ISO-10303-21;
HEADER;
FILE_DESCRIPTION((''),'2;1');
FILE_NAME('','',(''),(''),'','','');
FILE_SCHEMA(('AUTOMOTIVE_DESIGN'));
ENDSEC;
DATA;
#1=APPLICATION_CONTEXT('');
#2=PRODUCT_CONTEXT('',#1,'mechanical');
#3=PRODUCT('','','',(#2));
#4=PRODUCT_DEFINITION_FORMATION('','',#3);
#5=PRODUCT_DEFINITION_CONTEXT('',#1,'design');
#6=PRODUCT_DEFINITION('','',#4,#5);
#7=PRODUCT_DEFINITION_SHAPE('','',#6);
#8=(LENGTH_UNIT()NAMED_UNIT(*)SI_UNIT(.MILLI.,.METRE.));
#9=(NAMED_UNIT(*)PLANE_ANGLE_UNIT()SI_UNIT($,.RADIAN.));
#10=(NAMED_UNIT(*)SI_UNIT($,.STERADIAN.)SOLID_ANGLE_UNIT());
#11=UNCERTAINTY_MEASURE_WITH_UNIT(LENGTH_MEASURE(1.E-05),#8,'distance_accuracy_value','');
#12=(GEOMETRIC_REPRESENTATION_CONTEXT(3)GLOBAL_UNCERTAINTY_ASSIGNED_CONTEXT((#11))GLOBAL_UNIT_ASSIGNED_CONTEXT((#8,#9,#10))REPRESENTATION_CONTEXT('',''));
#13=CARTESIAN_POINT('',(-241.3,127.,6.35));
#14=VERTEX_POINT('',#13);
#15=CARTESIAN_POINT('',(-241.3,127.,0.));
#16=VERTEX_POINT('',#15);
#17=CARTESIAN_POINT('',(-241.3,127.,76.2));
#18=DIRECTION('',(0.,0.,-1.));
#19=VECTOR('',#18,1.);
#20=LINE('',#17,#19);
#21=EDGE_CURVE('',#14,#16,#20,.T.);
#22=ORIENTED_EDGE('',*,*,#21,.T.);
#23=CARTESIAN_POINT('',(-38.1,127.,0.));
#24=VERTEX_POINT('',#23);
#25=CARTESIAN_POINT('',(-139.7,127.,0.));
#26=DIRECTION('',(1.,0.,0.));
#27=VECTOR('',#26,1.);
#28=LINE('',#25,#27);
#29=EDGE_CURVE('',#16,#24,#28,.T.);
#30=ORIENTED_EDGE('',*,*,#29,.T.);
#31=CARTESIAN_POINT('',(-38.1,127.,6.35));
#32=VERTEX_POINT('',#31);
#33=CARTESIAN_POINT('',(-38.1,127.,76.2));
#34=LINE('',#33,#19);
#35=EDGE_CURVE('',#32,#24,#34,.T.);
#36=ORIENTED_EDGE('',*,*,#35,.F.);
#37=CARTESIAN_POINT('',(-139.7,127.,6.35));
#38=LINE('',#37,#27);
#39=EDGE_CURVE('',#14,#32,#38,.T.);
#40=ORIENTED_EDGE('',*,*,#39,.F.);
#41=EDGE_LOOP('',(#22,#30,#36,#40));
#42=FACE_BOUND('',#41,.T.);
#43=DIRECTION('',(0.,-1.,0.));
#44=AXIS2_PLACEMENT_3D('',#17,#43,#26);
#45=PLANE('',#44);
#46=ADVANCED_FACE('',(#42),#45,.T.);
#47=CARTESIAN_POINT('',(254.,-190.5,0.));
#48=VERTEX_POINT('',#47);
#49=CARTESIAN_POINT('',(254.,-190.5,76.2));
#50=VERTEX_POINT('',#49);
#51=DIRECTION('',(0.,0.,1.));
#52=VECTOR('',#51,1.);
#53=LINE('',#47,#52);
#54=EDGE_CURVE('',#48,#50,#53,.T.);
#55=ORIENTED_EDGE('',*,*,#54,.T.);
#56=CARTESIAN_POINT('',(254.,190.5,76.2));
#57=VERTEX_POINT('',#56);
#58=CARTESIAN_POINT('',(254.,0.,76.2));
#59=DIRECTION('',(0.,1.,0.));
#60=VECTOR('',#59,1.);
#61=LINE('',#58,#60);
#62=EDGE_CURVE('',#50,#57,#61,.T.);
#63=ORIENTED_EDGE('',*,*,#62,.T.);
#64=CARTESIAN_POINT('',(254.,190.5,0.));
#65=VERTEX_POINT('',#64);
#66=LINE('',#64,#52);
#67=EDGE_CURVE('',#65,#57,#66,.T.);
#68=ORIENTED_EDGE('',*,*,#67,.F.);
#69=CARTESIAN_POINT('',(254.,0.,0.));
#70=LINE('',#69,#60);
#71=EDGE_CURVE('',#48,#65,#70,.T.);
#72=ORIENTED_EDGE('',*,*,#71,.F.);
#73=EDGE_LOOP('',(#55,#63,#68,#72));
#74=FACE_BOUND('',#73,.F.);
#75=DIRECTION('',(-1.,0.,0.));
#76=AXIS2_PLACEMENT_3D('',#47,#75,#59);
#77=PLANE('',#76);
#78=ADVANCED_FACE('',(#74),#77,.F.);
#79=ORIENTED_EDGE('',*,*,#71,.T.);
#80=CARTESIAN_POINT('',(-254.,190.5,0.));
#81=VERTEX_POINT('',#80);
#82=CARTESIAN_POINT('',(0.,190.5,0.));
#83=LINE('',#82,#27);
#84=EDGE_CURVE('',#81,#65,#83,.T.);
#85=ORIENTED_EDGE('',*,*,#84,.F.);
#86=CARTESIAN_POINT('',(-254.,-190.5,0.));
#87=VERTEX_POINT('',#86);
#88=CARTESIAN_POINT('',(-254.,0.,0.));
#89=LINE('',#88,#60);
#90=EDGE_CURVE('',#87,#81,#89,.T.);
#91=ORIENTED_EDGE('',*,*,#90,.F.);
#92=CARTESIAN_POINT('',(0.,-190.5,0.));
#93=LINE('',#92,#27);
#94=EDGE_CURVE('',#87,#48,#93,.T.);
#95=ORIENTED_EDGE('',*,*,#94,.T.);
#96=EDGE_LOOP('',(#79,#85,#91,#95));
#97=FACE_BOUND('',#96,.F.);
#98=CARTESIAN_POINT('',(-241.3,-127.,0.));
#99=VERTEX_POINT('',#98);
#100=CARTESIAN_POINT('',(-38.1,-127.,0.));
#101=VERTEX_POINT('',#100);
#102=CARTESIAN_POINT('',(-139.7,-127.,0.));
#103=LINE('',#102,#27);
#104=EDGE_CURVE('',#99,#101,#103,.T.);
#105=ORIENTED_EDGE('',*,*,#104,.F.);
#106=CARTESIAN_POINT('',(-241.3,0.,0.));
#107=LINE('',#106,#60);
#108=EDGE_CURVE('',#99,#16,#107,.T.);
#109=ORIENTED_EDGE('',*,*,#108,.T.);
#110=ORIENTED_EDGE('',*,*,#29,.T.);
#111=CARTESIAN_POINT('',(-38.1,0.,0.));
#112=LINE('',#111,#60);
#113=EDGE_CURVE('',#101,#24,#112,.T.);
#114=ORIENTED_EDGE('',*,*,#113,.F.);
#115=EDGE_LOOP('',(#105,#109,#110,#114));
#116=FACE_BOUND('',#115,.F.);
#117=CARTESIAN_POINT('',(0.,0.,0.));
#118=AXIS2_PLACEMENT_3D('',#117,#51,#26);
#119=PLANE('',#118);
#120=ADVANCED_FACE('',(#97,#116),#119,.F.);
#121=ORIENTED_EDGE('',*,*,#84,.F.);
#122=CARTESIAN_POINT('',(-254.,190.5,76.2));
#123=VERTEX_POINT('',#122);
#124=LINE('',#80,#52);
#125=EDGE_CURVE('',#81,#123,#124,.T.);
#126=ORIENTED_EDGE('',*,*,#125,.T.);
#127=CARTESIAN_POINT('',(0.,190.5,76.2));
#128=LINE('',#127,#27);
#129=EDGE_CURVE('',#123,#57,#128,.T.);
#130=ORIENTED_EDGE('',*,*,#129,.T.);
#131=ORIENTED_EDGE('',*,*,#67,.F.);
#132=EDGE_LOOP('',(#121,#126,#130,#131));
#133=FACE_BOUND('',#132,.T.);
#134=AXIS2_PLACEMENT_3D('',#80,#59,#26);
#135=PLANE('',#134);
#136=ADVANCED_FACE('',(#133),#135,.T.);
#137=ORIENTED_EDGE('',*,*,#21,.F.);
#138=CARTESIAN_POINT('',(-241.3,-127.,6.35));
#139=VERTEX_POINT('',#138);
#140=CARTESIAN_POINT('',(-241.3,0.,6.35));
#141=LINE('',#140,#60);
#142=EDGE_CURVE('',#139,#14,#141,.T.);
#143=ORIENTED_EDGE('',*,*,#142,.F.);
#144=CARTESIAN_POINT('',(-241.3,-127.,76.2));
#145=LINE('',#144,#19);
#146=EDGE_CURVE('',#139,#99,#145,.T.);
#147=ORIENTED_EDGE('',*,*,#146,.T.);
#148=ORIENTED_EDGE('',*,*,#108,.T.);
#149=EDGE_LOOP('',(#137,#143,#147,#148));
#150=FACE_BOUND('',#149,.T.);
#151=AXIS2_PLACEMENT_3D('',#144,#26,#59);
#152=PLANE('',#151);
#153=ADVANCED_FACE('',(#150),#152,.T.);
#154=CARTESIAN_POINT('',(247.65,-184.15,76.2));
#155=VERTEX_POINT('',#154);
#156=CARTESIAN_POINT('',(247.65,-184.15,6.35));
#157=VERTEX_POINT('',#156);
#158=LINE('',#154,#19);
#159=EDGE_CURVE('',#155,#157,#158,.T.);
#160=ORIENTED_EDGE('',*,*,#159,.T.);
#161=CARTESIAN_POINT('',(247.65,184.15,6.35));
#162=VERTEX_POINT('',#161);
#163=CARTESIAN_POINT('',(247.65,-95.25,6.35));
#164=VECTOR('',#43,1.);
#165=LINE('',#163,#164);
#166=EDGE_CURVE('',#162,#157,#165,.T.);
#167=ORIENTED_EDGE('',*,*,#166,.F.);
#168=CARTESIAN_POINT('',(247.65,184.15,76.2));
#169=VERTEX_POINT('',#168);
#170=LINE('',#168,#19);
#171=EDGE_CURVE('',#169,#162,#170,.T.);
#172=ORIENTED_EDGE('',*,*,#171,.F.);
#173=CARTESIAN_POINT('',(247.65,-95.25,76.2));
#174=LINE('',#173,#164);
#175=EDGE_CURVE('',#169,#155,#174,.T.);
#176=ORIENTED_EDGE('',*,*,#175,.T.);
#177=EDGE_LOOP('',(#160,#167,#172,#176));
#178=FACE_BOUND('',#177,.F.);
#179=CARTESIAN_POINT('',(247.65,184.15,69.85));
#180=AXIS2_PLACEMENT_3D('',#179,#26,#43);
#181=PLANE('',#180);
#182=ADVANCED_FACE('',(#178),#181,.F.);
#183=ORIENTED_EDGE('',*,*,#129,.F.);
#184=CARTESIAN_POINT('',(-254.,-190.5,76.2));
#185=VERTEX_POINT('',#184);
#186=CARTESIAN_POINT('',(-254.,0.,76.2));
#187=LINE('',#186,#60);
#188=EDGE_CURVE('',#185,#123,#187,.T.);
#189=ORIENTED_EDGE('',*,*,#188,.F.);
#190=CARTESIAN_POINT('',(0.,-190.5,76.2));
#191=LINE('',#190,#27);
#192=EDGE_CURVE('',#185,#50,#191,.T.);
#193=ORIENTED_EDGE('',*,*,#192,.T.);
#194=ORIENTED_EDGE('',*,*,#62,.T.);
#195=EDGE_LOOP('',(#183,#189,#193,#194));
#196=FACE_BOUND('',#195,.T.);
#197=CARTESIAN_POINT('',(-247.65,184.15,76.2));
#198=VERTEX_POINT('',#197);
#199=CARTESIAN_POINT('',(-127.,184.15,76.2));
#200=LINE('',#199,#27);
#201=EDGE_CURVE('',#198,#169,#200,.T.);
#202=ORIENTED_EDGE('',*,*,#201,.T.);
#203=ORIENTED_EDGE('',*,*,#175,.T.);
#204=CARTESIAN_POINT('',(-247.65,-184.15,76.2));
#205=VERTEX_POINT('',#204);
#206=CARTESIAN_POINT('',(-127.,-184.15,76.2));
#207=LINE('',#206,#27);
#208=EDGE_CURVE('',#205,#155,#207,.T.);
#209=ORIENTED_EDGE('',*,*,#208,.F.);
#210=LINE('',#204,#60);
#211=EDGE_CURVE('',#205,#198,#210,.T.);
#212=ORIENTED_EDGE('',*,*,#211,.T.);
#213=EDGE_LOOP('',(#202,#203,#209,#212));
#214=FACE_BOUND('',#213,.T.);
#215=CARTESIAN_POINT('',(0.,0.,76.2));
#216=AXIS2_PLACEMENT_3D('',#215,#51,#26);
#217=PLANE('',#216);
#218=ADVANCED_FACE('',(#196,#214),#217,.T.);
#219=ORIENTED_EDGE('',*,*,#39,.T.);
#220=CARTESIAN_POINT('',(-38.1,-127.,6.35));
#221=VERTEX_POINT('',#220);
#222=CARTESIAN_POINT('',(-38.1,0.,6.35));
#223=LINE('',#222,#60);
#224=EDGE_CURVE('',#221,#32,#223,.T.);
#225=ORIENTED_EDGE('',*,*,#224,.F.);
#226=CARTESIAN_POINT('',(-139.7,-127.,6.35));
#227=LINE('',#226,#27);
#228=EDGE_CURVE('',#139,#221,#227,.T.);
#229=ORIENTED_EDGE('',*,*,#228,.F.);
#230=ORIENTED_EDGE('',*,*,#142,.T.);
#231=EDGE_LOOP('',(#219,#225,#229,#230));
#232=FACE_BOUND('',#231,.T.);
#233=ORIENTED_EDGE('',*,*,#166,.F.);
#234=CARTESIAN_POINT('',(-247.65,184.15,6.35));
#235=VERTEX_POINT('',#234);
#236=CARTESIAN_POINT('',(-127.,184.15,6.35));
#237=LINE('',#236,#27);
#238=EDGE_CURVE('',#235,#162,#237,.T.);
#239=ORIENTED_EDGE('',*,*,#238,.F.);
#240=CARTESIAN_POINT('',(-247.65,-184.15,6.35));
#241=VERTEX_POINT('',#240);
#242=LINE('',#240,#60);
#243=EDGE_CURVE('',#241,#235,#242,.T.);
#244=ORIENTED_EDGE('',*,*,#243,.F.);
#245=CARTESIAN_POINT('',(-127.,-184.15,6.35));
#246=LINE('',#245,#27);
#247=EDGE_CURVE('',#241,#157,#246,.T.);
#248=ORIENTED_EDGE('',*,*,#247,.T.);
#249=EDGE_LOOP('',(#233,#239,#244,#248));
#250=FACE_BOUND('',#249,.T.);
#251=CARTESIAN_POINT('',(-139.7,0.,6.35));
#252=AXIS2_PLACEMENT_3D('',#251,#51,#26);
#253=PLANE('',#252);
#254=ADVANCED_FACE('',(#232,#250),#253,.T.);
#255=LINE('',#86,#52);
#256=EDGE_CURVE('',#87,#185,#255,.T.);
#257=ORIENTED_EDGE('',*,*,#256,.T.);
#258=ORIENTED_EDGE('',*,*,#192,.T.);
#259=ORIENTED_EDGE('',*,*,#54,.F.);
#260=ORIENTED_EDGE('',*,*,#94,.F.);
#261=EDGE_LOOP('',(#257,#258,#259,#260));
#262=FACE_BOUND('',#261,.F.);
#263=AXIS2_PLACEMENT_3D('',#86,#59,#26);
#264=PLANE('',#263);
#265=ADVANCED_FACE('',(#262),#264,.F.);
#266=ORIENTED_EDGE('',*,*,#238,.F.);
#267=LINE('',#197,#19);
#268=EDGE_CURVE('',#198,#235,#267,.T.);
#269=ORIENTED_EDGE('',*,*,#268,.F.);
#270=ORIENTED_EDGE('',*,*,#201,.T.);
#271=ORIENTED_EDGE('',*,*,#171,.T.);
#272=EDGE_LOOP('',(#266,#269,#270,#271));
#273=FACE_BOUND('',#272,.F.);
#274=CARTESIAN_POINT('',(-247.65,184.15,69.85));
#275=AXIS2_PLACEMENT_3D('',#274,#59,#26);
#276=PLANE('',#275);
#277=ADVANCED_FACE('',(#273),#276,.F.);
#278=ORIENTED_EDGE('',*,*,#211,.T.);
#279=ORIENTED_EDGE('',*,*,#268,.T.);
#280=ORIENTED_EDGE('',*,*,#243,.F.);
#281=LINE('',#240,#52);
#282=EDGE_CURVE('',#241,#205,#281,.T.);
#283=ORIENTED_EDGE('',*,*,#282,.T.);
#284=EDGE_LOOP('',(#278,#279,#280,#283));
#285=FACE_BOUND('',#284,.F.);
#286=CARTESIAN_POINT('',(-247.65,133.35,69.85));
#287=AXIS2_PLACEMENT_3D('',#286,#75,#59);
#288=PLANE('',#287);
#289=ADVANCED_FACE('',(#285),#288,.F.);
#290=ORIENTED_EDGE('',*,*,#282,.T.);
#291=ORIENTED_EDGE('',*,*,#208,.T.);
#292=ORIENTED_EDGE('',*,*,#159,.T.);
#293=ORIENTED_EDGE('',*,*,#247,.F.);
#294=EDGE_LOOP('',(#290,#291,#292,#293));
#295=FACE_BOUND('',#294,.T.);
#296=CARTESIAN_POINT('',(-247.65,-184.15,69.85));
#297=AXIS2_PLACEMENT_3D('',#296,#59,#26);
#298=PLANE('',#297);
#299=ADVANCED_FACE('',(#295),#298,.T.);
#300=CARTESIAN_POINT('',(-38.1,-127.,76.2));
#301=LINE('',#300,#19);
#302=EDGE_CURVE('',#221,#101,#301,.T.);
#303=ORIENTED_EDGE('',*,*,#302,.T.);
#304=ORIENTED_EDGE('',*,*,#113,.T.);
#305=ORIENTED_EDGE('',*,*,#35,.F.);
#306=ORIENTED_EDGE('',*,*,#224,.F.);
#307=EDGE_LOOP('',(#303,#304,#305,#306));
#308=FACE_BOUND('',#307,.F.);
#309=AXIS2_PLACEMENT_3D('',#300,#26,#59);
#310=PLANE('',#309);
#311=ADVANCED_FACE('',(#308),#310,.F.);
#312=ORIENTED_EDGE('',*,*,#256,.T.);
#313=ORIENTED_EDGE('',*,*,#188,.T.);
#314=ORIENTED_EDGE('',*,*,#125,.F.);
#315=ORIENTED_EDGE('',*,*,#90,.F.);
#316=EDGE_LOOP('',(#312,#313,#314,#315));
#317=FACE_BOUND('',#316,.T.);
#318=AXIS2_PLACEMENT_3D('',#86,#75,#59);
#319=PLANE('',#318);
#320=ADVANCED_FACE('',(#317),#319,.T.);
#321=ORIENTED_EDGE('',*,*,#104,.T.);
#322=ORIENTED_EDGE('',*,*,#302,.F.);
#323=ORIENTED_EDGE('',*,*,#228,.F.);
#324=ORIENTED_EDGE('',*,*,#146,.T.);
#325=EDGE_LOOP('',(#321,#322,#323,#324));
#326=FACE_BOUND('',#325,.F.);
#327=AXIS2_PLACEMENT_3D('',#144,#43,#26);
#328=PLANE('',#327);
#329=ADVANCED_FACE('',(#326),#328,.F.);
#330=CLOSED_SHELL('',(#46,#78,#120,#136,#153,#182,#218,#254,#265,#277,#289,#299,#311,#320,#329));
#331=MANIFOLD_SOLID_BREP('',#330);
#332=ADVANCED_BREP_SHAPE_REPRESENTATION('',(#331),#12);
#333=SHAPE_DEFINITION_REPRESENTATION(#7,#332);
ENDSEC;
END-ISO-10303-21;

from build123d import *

# Parameters (mm, degrees)
F0_W     = 508
F0_H     = 381
F1_DEPTH = 76.2
F2_W     = 203.2
F2_H     = 254
F3_DEPTH = 76.2
F4_T     = -6.35
F5_W     = 215.9
F5_H     = 266.7
F5_W_2   = 203.2
F5_H_2   = 254
F6_DEPTH = 69.85


# Not quite as in the source:
# - a shell that OpenCascade refuses in one call is made with other operations: the cavity is built on its own and cut out


with BuildPart() as f1:
    # F0 (on Top) → F1 (new body)
    with BuildSketch(Plane.XY):
        Rectangle(F0_W, F0_H)
    extrude(amount=F1_DEPTH)

    # F2 (on face) → F3 (cut, through all)
    with BuildSketch(Plane.XY.offset(76.2)):
        with Locations((-139.7, 0)):
            Rectangle(F2_W, F2_H)
    extrude(amount=-F3_DEPTH, mode=Mode.SUBTRACT)

    # F4: a shell. OpenCascade refuses it in one call, so the cavity is built on its own and cut out:
    # the body offset inwards by the wall thickness, plus a prism from it out through each open face.
    f4_core = offset(f1.part, amount=F4_T, kind=Kind.INTERSECTION, mode=Mode.PRIVATE)
    f4_exits = [f4_core.faces().sort_by_distance(p)[0] for p in [
        (64.435271, 0, 69.85),
    ]]
    add(f4_core, mode=Mode.SUBTRACT)
    extrude(f4_exits, amount=-F4_T, mode=Mode.SUBTRACT)

    # F5 (on face) → F6 (cut)
    with BuildSketch(Plane.XY.offset(76.2)):
        with Locations((-139.7, 0)):
            Rectangle(F5_W, F5_H)
        with Locations((-139.7, 0)):
            Rectangle(F5_W_2, F5_H_2, mode=Mode.SUBTRACT)
    extrude(amount=-F6_DEPTH, mode=Mode.SUBTRACT)


solid = f1.part
